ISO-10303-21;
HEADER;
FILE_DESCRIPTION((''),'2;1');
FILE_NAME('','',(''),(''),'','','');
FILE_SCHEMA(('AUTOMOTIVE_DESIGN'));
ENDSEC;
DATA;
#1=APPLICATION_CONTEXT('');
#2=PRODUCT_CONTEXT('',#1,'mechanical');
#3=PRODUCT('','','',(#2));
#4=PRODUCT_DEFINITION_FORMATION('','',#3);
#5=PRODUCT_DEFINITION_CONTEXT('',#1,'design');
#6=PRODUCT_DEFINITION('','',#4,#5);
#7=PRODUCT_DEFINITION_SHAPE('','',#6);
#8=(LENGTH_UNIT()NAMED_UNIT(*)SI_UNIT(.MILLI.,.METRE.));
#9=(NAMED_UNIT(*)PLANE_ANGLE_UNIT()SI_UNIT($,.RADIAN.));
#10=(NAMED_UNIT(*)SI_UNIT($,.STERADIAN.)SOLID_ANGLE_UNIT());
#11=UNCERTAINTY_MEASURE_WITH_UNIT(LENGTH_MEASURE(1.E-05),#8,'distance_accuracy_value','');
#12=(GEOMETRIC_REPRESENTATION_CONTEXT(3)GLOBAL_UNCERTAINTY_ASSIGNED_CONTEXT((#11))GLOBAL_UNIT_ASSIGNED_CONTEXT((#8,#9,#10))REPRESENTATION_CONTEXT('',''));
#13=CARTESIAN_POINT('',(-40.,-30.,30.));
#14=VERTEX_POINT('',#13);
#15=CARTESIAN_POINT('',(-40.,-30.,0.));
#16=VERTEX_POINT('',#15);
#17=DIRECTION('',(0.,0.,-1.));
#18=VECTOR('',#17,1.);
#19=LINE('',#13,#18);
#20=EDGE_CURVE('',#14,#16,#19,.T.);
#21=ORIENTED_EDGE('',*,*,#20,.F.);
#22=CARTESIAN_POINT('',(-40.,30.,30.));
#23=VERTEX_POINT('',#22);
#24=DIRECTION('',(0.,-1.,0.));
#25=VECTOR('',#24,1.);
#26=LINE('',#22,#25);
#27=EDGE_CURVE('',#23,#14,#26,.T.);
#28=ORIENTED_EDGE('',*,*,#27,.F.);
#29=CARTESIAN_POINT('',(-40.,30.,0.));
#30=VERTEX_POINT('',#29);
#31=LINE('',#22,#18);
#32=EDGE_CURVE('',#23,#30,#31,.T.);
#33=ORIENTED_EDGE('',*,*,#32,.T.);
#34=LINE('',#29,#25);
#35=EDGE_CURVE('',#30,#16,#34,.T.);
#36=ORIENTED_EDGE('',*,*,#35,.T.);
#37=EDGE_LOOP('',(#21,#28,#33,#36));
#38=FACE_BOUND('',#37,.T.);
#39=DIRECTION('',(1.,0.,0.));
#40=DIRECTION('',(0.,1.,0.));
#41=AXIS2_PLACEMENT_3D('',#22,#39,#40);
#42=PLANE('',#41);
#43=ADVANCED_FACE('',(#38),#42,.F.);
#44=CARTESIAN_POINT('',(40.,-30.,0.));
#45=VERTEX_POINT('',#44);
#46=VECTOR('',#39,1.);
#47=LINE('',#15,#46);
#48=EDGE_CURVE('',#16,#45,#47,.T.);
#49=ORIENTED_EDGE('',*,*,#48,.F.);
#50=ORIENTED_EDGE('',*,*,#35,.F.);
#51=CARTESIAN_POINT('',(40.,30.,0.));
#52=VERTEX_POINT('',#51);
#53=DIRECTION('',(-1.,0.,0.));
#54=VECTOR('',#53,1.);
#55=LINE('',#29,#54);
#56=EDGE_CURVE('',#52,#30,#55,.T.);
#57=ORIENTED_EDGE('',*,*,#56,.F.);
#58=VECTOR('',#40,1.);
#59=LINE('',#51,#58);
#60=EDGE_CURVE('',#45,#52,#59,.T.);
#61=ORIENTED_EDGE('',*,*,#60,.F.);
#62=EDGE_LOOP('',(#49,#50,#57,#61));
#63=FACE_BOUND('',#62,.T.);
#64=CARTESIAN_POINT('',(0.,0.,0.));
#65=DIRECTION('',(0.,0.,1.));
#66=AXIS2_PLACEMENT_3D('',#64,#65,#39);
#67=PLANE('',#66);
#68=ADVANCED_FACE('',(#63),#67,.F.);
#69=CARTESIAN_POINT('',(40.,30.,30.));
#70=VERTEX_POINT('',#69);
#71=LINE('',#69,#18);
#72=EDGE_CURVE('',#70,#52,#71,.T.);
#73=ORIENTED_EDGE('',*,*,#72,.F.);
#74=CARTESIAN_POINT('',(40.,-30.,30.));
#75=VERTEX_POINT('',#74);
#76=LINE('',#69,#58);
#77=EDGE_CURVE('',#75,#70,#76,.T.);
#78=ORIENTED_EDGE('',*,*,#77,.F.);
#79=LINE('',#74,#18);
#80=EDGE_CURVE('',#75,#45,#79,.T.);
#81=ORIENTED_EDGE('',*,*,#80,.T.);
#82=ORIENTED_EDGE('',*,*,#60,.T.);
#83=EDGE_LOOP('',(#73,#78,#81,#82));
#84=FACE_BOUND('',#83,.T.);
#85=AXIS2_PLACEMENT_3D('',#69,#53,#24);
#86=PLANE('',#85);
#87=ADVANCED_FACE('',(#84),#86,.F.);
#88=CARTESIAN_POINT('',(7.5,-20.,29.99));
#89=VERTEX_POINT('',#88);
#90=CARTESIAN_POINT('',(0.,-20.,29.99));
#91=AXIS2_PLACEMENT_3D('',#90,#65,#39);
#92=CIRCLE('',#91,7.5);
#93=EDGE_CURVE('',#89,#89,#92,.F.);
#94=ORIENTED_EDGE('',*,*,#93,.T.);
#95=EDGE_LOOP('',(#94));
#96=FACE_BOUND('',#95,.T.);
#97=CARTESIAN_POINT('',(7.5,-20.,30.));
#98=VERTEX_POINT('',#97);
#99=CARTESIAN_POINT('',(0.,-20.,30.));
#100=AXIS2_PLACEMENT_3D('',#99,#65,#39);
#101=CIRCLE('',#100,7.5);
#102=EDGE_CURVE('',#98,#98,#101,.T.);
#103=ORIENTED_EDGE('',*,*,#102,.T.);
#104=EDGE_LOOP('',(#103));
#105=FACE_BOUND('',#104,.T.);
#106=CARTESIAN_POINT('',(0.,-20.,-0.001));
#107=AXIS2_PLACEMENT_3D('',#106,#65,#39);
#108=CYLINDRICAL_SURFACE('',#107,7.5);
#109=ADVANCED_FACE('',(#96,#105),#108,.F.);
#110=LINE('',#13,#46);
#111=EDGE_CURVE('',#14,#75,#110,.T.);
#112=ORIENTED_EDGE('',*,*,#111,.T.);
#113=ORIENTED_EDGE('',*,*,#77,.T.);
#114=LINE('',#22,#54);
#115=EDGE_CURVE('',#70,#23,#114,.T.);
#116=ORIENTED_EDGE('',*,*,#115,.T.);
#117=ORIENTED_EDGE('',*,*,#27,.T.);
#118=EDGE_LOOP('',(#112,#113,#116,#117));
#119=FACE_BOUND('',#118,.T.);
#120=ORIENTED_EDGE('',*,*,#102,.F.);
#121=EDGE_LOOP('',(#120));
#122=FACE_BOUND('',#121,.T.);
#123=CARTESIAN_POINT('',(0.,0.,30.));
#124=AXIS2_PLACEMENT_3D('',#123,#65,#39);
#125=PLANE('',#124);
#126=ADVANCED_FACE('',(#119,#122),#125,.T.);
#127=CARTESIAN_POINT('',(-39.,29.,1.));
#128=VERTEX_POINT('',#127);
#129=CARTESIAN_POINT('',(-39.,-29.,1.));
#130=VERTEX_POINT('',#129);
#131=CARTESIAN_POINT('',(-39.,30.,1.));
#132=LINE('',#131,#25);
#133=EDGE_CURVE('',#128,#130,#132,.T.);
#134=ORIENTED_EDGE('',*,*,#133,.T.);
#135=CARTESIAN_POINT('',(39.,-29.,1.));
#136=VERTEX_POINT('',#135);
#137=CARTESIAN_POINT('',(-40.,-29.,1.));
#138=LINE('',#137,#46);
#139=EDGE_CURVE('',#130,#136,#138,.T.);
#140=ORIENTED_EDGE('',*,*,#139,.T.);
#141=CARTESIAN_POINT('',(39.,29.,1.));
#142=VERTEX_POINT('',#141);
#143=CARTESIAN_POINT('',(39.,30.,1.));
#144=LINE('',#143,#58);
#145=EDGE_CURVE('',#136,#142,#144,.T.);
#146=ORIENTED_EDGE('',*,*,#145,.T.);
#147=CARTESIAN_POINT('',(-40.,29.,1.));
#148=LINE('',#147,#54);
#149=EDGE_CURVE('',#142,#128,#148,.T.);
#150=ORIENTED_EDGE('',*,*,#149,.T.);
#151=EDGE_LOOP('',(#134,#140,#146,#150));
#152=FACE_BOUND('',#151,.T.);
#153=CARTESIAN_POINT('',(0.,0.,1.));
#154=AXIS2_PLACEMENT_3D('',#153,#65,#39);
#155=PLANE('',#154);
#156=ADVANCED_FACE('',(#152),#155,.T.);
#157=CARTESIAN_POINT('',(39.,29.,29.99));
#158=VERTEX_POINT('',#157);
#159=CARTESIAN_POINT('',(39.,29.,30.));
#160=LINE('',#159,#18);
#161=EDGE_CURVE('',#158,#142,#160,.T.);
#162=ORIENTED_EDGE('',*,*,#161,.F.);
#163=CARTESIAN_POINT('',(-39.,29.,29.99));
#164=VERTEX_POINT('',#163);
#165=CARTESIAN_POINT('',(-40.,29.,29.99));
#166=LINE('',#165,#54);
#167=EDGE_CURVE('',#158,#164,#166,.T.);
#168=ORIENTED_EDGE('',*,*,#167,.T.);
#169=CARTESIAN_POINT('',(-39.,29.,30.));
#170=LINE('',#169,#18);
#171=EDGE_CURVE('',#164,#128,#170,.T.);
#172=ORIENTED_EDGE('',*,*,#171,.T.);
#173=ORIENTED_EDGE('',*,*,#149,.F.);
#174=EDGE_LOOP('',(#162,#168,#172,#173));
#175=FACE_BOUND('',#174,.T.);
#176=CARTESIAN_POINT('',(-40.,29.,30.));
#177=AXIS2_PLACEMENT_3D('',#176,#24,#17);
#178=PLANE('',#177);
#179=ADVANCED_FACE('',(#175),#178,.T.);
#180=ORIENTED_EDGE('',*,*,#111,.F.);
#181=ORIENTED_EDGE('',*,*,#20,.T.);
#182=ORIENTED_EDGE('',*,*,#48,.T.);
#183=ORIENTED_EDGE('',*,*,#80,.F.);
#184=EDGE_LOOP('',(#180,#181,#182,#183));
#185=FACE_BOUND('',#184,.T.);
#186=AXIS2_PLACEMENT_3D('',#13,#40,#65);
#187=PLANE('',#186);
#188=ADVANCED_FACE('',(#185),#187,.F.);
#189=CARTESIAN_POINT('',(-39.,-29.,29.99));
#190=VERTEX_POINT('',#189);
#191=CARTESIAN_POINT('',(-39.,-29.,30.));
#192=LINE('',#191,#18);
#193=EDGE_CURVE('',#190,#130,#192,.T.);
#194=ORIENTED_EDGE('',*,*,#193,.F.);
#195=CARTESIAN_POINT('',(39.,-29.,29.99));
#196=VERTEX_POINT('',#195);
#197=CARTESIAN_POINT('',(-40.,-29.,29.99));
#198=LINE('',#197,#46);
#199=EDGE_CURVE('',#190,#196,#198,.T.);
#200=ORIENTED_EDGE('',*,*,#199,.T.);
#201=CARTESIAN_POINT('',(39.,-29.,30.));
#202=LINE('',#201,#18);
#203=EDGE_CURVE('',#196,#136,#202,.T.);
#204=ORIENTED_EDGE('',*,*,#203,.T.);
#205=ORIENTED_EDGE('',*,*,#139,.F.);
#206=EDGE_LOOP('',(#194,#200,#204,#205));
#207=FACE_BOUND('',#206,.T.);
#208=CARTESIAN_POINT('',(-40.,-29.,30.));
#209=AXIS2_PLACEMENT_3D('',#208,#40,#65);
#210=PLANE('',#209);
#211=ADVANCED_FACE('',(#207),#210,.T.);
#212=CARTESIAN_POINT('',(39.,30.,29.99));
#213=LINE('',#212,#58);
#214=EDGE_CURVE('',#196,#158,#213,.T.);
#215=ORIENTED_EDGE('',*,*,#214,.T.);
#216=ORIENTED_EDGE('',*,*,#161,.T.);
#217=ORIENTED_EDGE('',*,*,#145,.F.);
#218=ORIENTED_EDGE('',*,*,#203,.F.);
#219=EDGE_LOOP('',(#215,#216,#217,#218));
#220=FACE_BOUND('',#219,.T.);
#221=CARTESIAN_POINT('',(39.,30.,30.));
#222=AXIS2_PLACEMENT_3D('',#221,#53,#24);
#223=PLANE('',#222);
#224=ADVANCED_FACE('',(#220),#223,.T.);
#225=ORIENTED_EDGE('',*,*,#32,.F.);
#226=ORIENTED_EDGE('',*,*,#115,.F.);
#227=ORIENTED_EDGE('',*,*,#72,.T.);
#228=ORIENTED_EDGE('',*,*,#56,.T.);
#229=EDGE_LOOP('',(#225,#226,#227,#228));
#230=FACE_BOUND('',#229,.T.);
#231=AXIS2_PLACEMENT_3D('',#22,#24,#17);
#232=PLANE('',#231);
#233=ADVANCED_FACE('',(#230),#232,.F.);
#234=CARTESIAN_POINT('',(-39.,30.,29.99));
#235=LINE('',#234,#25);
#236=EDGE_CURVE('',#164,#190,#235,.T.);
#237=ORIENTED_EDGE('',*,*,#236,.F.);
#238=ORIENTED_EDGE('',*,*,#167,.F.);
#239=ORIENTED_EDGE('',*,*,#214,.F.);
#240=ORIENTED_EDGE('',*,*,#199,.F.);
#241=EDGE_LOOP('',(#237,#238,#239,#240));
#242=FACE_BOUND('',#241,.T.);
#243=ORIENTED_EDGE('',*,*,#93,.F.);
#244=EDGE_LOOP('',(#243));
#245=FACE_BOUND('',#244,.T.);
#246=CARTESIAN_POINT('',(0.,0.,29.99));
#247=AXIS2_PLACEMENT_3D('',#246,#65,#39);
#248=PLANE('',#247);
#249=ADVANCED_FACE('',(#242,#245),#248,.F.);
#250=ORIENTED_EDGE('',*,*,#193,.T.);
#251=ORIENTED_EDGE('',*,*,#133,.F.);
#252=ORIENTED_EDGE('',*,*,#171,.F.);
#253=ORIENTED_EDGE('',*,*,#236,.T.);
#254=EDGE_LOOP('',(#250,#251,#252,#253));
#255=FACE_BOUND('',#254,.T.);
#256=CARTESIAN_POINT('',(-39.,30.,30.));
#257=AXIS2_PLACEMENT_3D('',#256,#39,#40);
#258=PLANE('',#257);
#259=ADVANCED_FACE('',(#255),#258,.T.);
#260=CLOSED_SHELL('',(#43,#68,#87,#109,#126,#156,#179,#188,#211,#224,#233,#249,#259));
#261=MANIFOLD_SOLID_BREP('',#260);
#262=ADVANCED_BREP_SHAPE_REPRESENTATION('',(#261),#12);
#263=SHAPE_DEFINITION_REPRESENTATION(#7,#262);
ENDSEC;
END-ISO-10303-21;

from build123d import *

# Parameters (mm, degrees)
SKETCH1_W           = 80
SKETCH1_H           = 60
BOSS_EXTRUDE1_DEPTH = 30
SHELL1_START        = -39
SHELL1_OUTLINE_W    = 58
SHELL1_OUTLINE_H    = 28.99
SHELL1_DEPTH        = 78
CUT_EXTRUDE4_REACH  = 60.31
SKETCH2_R           = 7.5


# Read off the part's stored shape, not the designer's step: Shell1
with BuildPart() as part:
    # Sketch1 → Boss-Extrude1 (new body)
    with BuildSketch(Plane.XY):
        Rectangle(SKETCH1_W, SKETCH1_H)
    extrude(amount=BOSS_EXTRUDE1_DEPTH)

    # Shell1 outline → Shell1 (cut)
    with BuildSketch(Plane.YZ.offset(SHELL1_START)):
        with Locations((0, 15.495)):
            Rectangle(SHELL1_OUTLINE_W, SHELL1_OUTLINE_H)
    extrude(amount=SHELL1_DEPTH, mode=Mode.SUBTRACT)

    # Sketch2 → Cut-Extrude4 (cut, up to next)
    with BuildSketch(Plane.XY.offset(30), mode=Mode.PRIVATE) as cut_extrude4_sk1:
        with Locations((0, -20)):
            Circle(SKETCH2_R)
    cut_extrude4_tool1 = extrude(cut_extrude4_sk1.sketch, amount=-CUT_EXTRUDE4_REACH, mode=Mode.PRIVATE) & part.part
    add(cut_extrude4_tool1.solids().sort_by_distance((0, -20, 30))[0], mode=Mode.SUBTRACT)


solid = part.part
